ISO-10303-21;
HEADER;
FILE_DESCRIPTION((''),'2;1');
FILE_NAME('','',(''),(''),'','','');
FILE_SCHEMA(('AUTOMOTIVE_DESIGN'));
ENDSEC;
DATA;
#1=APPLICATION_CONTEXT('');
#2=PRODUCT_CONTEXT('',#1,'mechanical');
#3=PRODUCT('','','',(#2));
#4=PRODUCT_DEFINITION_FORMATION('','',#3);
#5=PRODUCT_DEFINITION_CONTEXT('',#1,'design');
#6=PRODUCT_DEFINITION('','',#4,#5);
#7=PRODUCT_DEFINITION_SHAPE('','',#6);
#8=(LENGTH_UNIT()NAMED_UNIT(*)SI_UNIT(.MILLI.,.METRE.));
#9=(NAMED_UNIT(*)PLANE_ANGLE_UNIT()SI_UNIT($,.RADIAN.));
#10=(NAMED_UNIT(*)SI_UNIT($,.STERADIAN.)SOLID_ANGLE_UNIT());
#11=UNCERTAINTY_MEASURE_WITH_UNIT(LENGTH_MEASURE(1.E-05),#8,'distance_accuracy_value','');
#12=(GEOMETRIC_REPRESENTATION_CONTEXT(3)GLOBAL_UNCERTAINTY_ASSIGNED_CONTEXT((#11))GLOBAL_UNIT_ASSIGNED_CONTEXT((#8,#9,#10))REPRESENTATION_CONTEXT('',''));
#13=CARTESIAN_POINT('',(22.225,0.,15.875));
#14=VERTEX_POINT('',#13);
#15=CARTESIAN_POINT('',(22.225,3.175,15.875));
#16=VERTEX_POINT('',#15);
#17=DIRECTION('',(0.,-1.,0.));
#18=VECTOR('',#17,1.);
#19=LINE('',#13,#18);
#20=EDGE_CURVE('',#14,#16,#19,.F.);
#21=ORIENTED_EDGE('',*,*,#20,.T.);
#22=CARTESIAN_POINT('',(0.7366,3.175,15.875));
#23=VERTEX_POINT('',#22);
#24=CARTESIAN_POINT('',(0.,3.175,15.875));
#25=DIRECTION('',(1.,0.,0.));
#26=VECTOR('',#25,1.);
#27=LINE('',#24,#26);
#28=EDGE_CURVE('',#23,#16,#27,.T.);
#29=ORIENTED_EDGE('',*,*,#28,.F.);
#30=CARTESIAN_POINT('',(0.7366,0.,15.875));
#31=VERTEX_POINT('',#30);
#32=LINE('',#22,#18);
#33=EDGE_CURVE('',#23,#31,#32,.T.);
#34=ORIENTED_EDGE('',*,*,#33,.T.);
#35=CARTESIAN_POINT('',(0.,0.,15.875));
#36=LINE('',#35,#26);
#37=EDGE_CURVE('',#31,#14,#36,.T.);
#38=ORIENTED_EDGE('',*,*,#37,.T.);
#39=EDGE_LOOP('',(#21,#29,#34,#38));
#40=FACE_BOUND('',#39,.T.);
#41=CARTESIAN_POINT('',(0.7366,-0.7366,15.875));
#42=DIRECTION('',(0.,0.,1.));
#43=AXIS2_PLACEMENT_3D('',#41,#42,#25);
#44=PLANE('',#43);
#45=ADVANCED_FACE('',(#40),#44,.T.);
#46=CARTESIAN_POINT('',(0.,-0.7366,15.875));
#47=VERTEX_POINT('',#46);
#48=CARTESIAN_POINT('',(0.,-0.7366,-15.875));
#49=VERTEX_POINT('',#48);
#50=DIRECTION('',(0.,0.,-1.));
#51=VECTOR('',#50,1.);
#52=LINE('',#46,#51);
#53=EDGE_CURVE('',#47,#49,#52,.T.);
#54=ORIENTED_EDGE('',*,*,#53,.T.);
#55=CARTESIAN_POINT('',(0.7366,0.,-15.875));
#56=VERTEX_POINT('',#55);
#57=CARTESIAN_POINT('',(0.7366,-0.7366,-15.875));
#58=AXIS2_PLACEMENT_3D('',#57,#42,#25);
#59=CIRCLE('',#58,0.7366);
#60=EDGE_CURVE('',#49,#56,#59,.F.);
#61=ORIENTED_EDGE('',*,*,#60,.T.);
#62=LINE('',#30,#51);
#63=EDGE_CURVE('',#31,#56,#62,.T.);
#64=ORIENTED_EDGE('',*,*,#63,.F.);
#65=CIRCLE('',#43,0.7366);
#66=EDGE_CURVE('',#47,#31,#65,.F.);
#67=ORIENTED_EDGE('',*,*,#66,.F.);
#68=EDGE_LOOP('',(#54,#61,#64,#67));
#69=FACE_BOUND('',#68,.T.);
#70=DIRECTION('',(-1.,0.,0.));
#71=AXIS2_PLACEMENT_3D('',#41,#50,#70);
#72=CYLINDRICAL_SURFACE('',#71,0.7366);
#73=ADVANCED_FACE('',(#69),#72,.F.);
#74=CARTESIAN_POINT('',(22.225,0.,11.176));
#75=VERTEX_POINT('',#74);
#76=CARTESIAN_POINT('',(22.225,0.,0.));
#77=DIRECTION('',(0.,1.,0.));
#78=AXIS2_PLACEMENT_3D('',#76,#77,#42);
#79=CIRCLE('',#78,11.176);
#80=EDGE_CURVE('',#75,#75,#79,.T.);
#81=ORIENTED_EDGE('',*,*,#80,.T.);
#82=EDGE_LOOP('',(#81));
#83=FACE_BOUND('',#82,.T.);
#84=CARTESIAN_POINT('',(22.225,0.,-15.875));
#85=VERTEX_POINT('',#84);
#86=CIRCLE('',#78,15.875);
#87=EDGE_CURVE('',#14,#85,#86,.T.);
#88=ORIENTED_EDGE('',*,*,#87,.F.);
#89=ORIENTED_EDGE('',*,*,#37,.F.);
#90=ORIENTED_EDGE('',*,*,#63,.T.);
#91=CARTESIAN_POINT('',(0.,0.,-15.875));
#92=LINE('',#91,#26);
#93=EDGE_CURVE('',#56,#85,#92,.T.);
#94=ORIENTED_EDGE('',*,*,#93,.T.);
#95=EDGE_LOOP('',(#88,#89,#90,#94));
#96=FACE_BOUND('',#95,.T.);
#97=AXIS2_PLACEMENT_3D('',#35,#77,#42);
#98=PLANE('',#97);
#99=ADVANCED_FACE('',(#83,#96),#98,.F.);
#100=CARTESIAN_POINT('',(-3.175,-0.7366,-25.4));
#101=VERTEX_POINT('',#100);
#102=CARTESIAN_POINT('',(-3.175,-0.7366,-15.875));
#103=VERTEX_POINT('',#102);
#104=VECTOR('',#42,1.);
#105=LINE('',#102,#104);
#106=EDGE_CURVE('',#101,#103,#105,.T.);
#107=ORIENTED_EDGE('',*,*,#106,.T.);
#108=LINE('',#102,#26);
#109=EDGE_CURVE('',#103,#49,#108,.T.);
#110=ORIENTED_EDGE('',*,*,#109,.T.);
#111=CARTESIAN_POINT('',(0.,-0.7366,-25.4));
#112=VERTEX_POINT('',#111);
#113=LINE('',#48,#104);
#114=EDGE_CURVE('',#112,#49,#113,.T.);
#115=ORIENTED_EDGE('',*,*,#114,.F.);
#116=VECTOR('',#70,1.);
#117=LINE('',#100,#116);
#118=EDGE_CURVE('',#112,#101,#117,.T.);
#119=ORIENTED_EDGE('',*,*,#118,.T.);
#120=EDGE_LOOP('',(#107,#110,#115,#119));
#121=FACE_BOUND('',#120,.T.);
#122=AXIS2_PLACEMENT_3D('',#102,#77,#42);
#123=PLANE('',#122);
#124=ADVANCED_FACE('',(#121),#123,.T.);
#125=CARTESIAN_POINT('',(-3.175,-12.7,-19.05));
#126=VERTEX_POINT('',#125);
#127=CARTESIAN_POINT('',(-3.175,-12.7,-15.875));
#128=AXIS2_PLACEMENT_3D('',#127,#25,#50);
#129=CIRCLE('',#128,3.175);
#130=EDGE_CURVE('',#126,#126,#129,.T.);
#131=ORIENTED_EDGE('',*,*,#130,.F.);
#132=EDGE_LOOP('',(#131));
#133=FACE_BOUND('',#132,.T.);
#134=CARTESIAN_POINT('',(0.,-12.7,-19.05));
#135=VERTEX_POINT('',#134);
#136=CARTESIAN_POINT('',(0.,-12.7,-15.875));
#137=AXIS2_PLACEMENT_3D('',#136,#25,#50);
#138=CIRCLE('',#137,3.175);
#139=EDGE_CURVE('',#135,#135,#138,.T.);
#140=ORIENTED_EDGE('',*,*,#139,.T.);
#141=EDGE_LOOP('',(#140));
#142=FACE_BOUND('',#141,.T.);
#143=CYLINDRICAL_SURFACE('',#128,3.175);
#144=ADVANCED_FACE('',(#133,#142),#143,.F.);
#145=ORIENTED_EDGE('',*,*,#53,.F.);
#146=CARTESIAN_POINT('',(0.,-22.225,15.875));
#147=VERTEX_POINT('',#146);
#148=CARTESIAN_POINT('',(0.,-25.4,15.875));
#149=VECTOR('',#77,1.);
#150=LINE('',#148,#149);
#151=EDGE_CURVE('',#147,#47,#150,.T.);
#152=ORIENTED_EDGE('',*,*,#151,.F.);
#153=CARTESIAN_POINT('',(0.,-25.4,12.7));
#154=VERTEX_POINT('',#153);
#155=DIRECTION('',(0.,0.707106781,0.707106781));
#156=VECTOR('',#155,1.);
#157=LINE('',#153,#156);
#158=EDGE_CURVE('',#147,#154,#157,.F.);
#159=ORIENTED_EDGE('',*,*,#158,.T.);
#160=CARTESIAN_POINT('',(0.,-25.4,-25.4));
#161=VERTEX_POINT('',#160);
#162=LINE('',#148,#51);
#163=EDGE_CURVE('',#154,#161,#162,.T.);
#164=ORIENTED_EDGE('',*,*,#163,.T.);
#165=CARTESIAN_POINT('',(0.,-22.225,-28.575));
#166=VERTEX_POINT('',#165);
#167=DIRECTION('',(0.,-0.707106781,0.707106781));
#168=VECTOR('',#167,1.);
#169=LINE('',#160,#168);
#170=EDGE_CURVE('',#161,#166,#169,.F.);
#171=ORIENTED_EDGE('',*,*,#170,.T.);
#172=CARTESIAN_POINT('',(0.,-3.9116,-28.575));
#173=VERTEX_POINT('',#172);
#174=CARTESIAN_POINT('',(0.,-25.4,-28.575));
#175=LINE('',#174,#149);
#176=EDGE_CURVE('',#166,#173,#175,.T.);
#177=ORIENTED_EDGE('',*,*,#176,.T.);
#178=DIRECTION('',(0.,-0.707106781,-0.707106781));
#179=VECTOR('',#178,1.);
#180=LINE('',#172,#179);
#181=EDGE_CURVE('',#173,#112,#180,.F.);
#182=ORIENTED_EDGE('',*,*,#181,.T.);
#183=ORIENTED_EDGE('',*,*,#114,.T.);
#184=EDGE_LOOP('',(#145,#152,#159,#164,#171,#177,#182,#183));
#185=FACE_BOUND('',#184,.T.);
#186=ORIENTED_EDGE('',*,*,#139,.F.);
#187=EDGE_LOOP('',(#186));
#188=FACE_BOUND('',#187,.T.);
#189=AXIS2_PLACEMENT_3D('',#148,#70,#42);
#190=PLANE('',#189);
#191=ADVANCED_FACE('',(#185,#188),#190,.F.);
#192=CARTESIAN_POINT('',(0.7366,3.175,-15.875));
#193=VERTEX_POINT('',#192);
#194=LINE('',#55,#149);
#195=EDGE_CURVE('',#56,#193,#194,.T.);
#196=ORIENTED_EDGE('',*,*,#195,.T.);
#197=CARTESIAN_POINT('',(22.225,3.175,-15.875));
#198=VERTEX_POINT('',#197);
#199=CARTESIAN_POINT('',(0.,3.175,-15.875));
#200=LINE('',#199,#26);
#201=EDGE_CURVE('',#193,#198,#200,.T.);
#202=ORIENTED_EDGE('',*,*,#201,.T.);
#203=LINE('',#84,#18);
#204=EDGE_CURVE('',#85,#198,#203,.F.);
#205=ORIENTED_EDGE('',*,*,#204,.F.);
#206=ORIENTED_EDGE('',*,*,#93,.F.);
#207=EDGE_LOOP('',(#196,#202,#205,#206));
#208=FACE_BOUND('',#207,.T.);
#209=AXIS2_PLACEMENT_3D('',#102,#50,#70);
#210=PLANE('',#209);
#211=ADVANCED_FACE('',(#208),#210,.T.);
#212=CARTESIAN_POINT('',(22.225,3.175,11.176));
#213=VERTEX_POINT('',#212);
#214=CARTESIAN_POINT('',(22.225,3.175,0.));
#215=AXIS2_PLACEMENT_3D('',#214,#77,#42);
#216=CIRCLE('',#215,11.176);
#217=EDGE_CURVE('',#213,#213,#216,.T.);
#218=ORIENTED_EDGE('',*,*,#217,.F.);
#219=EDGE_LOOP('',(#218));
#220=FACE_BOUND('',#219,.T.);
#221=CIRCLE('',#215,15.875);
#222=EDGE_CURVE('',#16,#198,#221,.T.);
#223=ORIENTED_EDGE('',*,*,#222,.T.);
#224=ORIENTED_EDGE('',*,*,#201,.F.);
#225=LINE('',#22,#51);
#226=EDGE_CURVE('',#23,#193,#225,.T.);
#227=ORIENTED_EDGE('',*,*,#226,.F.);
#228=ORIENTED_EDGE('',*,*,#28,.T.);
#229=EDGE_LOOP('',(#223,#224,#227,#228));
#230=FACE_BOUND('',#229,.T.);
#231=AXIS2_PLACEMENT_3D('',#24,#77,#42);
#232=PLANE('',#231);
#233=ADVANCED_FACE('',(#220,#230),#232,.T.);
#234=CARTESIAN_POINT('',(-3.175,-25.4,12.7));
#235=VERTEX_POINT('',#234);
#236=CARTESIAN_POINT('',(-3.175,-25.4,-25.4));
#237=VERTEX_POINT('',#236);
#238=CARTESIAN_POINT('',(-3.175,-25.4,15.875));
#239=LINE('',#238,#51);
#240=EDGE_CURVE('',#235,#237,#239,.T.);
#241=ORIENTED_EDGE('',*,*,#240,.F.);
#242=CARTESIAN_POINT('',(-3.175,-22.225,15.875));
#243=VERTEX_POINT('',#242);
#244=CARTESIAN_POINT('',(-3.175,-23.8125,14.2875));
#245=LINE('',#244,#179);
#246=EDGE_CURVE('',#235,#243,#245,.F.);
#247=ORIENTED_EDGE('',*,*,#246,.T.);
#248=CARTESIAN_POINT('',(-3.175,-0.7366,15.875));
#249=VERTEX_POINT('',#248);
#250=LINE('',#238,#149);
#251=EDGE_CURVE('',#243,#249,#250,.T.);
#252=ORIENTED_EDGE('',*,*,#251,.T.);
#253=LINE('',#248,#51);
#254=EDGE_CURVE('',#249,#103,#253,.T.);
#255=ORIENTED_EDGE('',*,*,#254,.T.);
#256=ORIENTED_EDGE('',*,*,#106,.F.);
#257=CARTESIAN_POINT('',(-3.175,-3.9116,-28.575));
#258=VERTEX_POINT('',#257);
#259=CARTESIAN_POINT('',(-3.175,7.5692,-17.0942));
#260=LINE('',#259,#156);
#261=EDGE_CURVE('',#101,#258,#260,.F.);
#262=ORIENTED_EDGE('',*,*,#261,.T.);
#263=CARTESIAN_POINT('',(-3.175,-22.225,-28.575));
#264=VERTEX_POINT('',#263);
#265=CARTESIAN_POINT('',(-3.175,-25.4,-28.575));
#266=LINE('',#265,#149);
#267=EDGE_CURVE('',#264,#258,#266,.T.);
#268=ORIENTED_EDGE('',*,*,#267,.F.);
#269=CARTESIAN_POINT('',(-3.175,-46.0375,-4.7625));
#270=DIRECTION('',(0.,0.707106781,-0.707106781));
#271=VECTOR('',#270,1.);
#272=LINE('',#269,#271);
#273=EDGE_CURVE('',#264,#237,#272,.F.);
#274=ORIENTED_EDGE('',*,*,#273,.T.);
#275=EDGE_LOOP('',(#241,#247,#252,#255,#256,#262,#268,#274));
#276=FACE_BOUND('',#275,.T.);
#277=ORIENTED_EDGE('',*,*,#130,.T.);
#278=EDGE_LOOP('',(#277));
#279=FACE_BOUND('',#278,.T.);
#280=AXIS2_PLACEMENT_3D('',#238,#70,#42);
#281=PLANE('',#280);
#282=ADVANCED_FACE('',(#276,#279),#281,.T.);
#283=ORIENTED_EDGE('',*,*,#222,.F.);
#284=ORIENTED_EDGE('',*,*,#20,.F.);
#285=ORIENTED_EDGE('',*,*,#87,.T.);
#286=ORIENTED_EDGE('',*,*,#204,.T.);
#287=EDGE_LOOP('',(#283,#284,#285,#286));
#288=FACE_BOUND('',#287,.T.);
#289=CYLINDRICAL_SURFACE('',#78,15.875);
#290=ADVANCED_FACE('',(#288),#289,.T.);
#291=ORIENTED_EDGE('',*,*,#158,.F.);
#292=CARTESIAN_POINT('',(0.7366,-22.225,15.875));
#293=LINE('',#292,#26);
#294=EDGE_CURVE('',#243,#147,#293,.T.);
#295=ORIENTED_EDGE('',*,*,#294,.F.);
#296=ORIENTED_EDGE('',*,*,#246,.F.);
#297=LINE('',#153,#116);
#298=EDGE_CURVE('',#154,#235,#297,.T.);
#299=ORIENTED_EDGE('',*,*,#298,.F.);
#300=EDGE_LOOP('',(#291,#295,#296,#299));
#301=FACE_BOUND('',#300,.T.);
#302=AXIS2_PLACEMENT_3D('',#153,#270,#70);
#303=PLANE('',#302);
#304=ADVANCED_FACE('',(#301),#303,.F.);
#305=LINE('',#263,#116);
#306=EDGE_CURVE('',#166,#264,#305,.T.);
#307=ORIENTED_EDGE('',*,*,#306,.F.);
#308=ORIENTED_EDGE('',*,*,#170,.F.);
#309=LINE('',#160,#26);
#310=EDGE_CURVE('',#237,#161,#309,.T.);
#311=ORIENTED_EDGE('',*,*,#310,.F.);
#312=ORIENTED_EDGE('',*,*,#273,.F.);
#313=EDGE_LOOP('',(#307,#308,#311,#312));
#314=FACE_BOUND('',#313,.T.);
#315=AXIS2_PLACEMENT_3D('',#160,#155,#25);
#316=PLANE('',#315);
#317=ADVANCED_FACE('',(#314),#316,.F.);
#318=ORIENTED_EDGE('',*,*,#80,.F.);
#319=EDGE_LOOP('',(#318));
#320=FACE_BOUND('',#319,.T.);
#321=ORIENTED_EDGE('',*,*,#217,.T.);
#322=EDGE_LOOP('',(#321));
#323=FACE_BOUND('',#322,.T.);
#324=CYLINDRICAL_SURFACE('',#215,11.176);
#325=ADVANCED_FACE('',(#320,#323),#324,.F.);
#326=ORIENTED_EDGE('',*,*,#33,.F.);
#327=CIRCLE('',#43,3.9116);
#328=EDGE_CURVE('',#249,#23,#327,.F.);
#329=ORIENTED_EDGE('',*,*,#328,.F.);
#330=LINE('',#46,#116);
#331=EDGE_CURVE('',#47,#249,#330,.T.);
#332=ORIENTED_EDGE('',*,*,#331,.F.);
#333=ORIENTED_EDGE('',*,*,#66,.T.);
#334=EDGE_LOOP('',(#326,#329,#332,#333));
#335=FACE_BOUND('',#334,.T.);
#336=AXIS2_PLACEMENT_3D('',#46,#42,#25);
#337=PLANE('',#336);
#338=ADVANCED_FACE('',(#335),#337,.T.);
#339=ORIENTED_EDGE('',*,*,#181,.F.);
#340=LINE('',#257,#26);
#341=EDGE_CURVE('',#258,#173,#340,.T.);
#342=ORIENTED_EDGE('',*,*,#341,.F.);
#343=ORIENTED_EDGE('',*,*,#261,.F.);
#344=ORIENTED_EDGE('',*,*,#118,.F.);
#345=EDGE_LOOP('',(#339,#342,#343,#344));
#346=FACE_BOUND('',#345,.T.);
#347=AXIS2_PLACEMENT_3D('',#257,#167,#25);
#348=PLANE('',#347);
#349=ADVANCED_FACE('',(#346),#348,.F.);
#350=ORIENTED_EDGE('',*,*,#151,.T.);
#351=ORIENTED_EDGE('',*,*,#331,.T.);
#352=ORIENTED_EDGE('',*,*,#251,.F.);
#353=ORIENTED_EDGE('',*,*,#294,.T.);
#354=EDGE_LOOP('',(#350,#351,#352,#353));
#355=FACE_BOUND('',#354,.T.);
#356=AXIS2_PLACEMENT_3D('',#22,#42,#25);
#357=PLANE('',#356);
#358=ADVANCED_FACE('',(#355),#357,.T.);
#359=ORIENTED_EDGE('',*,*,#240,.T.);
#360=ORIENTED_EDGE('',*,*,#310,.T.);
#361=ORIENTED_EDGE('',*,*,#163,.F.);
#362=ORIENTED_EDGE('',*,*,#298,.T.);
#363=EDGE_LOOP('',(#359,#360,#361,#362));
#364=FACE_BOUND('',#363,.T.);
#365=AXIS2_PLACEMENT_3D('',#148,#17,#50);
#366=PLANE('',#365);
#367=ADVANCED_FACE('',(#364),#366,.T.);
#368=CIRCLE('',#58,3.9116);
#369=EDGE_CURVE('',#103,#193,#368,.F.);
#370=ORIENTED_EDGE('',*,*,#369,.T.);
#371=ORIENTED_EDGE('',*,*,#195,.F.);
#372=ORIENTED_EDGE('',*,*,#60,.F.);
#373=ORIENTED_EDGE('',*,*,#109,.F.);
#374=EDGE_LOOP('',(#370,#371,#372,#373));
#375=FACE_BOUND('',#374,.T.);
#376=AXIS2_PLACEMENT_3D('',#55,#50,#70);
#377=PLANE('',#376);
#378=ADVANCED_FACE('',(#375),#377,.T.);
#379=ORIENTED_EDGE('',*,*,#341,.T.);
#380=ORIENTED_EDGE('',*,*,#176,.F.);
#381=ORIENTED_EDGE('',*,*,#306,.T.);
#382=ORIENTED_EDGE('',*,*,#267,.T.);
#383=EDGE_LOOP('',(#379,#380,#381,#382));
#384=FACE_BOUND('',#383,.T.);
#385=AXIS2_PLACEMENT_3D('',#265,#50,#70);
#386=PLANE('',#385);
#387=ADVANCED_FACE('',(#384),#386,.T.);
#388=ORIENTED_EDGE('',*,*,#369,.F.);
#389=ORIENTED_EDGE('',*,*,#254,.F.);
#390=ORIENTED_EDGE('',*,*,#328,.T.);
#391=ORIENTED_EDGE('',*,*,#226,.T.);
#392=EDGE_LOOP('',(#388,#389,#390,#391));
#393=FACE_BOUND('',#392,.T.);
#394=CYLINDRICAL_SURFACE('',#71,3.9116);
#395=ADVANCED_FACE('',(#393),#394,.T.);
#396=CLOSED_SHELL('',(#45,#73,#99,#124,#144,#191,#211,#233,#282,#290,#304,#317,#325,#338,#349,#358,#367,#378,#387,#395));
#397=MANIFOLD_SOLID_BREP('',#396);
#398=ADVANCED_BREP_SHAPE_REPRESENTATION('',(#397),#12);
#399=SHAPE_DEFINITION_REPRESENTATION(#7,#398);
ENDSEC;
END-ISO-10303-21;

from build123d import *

# Parameters (mm, degrees)
BASE_FLANGE1_DEPTH  = 15.875
CUT_EXTRUDE1_DEPTH  = 51.201157855
SKETCH8_W           = 12.7
SKETCH8_H           = 24.6634
TAB1_DEPTH          = 3.175
SKETCH7_R           = 3.175
CUT_EXTRUDE2_DEPTH  = 54.975
BREAK_CORNER1_START = -3.175
BREAK_CORNER1_DEPTH = 3.175


# Read off the part's stored shape, not the designer's step: Break-Corner1
# Sheet-metal steps are written as plain solids
with BuildPart() as part:
    # Sketch1 → Base-Flange1 (new, symmetric)
    with BuildSketch(Plane.XY):
        with BuildLine():
            Line((0, -25.4), (0, -0.7366))
            ThreePointArc((0, -0.7366), (0.215745145, -0.215745145), (0.7366, 0))
            Line((0.7366, 0), (38.1, 0))
            Line((38.1, 0), (38.1, 3.175))
            Line((38.1, 3.175), (0.7366, 3.175))
            ThreePointArc((0.7366, 3.175), (-2.029318885, 2.029318885), (-3.175, -0.7366))
            Line((-3.175, -0.7366), (-3.175, -25.4))
            Line((-3.175, -25.4), (0, -25.4))
        make_face()
    extrude(amount=BASE_FLANGE1_DEPTH, both=True)

    # Sketch6 → Cut-Extrude1 (cut, through all)
    with BuildSketch(Plane(origin=(0, 3.175, 0), x_dir=(1, 0, 0), z_dir=(0, 1, 0))):
        with BuildLine():
            Line((38.1, -15.875), (38.1, -6.7e-08))
            ThreePointArc((38.1, -6.7e-08), (33.450320128, -11.225320175), (22.225, -15.875))
            Line((22.225, -15.875), (38.1, -15.875))
        make_face()
        with BuildLine():
            Line((38.1, 15.875), (22.225, 15.875))
            ThreePointArc((22.225, 15.875), (33.450320175, 11.225320128), (38.1, -6.7e-08))
            Line((38.1, -6.7e-08), (38.1, 15.875))
        make_face()
        with BuildLine():
            ThreePointArc((33.401, 0), (30.127625387, 7.902625387), (22.225, 11.176))
            Line((22.225, 11.176), (22.225, -11.176))
            ThreePointArc((22.225, -11.176), (30.127625387, -7.902625387), (33.401, 0))
        make_face()
        with BuildLine():
            Line((22.225, -11.176), (22.225, 11.176))
            ThreePointArc((22.225, 11.176), (11.049, 0), (22.225, -11.176))
        make_face()
    extrude(amount=-CUT_EXTRUDE1_DEPTH, mode=Mode.SUBTRACT)

    # Sketch8 → Tab1 (add)
    with BuildSketch(Plane(origin=(0, 0, 0), x_dir=(0, 0, -1), z_dir=(1, 0, 0))):
        with Locations((22.225, -13.0683)):
            Rectangle(SKETCH8_W, SKETCH8_H)
    extrude(amount=-TAB1_DEPTH)

    # Sketch7 → Cut-Extrude2 (cut, through all)
    with BuildSketch(Plane(origin=(0, 0, 0), x_dir=(0, 0, -1), z_dir=(1, 0, 0))):
        with Locations((15.875, -12.7)):
            Circle(SKETCH7_R)
    extrude(amount=-CUT_EXTRUDE2_DEPTH, mode=Mode.SUBTRACT)

    # Break-Corner1 outline → Break-Corner1 (cut)
    with BuildSketch(Plane.YZ.offset(BREAK_CORNER1_START)):
        Polygon((-25.4, -28.575), (-22.225, -28.575), (-25.4, -25.4), align=None)
        Polygon((-25.4, 15.875), (-25.4, 12.7), (-22.225, 15.875), align=None)
        Polygon((-0.7366, -25.4), (-3.9116, -28.575), (-0.7366, -28.575), align=None)
    extrude(amount=BREAK_CORNER1_DEPTH, mode=Mode.SUBTRACT)


solid = part.part
